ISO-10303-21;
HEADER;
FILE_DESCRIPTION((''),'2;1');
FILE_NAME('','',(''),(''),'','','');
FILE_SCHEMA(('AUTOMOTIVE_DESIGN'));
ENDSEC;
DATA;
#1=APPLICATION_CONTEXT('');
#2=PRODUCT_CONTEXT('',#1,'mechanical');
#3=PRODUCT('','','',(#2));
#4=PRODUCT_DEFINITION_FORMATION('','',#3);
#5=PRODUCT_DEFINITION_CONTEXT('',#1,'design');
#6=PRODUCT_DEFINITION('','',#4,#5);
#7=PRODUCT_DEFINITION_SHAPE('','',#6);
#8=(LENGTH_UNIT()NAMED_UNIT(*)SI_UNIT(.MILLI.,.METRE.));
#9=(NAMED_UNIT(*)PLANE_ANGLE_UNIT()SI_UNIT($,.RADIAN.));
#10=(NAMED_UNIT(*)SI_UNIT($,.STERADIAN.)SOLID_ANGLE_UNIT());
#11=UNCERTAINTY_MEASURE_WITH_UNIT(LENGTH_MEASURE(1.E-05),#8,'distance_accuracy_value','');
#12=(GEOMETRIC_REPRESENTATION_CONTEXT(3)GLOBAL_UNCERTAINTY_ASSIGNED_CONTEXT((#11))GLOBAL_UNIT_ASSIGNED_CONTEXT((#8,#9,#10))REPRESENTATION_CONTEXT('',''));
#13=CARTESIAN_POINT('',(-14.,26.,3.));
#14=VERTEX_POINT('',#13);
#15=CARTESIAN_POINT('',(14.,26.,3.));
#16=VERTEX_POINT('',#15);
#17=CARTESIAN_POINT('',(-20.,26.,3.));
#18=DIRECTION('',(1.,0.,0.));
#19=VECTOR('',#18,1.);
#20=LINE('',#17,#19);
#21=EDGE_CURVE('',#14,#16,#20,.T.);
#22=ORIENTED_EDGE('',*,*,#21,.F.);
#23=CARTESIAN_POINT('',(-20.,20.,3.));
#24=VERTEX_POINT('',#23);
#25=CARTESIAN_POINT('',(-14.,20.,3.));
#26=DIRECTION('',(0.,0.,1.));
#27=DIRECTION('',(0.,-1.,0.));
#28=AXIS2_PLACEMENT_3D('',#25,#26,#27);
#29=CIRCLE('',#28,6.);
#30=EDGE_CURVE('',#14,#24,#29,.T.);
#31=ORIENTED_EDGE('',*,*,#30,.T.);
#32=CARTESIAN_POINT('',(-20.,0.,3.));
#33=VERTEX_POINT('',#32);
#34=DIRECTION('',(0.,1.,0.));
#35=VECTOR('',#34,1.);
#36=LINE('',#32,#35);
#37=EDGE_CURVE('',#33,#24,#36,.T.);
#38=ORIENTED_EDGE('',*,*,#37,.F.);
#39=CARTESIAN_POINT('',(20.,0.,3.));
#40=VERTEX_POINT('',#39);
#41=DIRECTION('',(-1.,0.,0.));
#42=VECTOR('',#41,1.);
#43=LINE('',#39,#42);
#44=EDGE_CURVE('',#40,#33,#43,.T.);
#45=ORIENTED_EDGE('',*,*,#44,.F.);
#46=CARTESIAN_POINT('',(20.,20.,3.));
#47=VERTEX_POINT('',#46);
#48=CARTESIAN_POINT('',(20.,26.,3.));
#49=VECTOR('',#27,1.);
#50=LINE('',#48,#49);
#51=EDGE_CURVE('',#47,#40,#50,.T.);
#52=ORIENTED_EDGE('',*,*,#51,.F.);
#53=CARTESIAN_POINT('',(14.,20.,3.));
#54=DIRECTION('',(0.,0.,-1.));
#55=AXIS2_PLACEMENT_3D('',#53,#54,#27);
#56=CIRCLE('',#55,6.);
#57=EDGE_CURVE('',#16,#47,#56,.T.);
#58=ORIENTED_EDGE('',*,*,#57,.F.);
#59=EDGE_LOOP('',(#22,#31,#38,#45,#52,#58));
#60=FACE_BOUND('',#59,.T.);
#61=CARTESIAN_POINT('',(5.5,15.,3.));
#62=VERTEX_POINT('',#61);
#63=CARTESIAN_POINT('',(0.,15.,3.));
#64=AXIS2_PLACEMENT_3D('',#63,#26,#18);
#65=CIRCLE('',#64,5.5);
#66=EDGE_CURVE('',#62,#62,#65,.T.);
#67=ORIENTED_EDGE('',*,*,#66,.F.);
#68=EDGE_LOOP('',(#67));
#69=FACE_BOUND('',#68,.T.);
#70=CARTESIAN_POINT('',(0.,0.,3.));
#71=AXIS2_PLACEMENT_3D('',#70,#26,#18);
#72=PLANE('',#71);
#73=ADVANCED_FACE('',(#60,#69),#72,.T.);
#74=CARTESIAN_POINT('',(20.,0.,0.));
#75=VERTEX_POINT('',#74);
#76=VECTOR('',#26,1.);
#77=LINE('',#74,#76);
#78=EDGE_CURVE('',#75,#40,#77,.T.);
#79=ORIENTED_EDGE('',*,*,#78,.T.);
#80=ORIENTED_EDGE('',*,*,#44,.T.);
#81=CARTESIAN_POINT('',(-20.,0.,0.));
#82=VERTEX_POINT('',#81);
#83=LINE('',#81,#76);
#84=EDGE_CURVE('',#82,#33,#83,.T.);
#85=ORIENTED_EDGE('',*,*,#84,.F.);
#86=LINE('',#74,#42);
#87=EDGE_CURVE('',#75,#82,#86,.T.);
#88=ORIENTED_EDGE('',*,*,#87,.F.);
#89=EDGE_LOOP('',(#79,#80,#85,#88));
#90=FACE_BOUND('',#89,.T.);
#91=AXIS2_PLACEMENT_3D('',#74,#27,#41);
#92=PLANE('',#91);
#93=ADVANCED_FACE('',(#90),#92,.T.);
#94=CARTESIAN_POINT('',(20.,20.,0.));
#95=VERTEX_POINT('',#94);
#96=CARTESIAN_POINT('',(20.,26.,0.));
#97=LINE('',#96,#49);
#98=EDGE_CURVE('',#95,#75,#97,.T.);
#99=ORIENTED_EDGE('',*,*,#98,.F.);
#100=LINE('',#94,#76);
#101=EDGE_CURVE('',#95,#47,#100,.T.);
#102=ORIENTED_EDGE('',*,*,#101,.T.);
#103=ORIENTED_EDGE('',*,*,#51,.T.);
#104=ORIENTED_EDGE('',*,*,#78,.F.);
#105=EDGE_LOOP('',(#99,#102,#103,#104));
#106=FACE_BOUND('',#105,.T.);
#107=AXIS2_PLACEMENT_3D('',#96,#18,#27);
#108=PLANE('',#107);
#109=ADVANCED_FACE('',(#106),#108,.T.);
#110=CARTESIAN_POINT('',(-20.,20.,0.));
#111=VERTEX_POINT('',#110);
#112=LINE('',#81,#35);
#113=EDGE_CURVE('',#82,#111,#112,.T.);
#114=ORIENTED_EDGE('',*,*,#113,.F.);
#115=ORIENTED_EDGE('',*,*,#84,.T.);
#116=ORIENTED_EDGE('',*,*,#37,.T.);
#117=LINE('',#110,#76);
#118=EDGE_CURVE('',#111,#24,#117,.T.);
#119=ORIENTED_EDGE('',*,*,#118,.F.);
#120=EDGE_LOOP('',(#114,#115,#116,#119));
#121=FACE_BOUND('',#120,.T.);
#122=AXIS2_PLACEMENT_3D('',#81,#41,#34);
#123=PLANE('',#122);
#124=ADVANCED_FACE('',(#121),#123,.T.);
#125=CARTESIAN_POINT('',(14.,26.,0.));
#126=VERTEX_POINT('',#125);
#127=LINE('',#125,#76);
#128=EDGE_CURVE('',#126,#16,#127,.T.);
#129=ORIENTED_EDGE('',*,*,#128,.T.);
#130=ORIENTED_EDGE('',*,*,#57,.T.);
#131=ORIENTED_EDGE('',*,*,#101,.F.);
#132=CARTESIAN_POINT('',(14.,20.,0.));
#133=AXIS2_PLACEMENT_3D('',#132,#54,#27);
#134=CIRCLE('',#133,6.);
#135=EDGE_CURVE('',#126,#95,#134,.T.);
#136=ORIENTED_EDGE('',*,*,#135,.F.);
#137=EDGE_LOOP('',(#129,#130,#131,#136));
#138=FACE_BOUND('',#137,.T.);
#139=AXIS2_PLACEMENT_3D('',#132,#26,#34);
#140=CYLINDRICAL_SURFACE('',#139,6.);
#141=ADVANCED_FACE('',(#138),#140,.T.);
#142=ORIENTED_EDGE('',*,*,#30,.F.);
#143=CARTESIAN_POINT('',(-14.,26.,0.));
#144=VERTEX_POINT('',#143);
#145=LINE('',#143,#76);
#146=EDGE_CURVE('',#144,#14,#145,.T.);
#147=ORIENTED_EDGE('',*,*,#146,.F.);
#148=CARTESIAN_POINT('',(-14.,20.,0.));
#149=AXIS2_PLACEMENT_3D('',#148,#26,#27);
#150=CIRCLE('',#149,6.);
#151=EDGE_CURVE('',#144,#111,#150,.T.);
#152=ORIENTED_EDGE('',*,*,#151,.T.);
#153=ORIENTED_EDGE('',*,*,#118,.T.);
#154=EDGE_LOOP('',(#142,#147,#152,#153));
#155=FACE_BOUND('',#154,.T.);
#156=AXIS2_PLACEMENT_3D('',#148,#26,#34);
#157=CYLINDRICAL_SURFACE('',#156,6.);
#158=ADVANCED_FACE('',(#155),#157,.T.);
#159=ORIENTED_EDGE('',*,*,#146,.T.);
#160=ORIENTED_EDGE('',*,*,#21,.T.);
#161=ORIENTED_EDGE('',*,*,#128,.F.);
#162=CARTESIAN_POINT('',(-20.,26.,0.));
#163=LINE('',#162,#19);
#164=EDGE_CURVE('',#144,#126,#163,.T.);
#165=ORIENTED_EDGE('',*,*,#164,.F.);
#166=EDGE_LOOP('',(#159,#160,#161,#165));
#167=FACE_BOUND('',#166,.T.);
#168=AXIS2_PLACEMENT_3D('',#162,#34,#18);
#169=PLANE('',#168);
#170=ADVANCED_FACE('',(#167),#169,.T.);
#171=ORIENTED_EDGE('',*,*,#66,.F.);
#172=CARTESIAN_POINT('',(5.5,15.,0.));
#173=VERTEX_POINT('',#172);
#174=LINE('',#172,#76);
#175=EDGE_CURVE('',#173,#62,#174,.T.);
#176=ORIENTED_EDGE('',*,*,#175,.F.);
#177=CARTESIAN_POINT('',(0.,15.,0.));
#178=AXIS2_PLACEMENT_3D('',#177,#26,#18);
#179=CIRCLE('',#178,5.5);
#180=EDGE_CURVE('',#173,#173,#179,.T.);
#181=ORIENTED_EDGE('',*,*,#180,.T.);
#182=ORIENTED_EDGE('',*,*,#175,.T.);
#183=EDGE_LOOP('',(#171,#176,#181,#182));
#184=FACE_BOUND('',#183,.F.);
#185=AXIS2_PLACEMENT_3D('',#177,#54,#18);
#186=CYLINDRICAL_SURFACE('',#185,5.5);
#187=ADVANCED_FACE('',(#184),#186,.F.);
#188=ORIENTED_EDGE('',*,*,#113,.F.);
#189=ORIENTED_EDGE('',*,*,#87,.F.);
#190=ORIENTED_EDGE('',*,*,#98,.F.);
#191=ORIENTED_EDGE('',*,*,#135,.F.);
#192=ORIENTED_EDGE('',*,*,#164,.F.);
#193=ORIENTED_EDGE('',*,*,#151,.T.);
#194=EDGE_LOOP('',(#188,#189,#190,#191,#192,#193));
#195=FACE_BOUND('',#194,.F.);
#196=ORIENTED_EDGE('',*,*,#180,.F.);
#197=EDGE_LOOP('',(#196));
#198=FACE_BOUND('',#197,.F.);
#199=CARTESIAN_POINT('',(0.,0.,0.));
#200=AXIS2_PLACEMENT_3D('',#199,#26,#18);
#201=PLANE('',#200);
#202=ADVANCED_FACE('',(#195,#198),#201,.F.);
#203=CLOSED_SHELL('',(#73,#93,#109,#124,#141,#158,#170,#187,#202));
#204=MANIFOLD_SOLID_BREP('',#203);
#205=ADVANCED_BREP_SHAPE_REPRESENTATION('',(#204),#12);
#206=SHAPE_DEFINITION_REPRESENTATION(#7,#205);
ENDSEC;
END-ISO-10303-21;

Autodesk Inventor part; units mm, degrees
ref_plane "YZ Plane" through (0, 0, 0) normal (1, 0, 0) x (0, 1, 0)
ref_plane "XZ Plane" through (0, 0, 0) normal (0, 1, 0) x (-1, 0, 0)
ref_plane "XY Plane" through (0, 0, 0) normal (0, 0, 1) x (1, 0, 0)
sketch "Sketch12" plane through (0, 0, 0) normal (0, 0, 1) x (1, 0, 0)
  line L0 (-20, 26) -> (20, 26)
  line L1 (20, 26) -> (20, 0)
  line L2 (20, 0) -> (-20, 0)
  line L3 (-20, 0) -> (-20, 26)
  circle A0 centre (0, 15) radius 5.5
  point P0 (0, 0)
  point P1 (0, 0)
  dimension "d73" = 40
  dimension "d74" = 11
  dimension "d77" = 15
  dimension "d78" = 26
extrude "Plate3" add sketch "Sketch12" along normal blind 3
fillet "Corner Round1" radius 6 2 edges at (-20, 26, 1.5) (20, 26, 1.5)
equation "\"d75\" = Thickness"
equation "\"BendRadius\" = Thickness"
equation "\"BendReliefWidth\" = Thickness"
equation "\"BendReliefDepth\" = 0.5 * Thickness"
equation "\"CornerReliefSize\" = 4 * Thickness"
equation "\"MinimumRemnant\" = 2 * Thickness"
equation "\"TransitionRadius\" = BendRadius"
equation "\"JacobiRadiusSize\" = BendRadius"
equation "\"GapSize\" = Thickness"
equation "\"Thickness\" = 3"
properties part number "ДМФ 094 Постель НОС крепление v2.0"
